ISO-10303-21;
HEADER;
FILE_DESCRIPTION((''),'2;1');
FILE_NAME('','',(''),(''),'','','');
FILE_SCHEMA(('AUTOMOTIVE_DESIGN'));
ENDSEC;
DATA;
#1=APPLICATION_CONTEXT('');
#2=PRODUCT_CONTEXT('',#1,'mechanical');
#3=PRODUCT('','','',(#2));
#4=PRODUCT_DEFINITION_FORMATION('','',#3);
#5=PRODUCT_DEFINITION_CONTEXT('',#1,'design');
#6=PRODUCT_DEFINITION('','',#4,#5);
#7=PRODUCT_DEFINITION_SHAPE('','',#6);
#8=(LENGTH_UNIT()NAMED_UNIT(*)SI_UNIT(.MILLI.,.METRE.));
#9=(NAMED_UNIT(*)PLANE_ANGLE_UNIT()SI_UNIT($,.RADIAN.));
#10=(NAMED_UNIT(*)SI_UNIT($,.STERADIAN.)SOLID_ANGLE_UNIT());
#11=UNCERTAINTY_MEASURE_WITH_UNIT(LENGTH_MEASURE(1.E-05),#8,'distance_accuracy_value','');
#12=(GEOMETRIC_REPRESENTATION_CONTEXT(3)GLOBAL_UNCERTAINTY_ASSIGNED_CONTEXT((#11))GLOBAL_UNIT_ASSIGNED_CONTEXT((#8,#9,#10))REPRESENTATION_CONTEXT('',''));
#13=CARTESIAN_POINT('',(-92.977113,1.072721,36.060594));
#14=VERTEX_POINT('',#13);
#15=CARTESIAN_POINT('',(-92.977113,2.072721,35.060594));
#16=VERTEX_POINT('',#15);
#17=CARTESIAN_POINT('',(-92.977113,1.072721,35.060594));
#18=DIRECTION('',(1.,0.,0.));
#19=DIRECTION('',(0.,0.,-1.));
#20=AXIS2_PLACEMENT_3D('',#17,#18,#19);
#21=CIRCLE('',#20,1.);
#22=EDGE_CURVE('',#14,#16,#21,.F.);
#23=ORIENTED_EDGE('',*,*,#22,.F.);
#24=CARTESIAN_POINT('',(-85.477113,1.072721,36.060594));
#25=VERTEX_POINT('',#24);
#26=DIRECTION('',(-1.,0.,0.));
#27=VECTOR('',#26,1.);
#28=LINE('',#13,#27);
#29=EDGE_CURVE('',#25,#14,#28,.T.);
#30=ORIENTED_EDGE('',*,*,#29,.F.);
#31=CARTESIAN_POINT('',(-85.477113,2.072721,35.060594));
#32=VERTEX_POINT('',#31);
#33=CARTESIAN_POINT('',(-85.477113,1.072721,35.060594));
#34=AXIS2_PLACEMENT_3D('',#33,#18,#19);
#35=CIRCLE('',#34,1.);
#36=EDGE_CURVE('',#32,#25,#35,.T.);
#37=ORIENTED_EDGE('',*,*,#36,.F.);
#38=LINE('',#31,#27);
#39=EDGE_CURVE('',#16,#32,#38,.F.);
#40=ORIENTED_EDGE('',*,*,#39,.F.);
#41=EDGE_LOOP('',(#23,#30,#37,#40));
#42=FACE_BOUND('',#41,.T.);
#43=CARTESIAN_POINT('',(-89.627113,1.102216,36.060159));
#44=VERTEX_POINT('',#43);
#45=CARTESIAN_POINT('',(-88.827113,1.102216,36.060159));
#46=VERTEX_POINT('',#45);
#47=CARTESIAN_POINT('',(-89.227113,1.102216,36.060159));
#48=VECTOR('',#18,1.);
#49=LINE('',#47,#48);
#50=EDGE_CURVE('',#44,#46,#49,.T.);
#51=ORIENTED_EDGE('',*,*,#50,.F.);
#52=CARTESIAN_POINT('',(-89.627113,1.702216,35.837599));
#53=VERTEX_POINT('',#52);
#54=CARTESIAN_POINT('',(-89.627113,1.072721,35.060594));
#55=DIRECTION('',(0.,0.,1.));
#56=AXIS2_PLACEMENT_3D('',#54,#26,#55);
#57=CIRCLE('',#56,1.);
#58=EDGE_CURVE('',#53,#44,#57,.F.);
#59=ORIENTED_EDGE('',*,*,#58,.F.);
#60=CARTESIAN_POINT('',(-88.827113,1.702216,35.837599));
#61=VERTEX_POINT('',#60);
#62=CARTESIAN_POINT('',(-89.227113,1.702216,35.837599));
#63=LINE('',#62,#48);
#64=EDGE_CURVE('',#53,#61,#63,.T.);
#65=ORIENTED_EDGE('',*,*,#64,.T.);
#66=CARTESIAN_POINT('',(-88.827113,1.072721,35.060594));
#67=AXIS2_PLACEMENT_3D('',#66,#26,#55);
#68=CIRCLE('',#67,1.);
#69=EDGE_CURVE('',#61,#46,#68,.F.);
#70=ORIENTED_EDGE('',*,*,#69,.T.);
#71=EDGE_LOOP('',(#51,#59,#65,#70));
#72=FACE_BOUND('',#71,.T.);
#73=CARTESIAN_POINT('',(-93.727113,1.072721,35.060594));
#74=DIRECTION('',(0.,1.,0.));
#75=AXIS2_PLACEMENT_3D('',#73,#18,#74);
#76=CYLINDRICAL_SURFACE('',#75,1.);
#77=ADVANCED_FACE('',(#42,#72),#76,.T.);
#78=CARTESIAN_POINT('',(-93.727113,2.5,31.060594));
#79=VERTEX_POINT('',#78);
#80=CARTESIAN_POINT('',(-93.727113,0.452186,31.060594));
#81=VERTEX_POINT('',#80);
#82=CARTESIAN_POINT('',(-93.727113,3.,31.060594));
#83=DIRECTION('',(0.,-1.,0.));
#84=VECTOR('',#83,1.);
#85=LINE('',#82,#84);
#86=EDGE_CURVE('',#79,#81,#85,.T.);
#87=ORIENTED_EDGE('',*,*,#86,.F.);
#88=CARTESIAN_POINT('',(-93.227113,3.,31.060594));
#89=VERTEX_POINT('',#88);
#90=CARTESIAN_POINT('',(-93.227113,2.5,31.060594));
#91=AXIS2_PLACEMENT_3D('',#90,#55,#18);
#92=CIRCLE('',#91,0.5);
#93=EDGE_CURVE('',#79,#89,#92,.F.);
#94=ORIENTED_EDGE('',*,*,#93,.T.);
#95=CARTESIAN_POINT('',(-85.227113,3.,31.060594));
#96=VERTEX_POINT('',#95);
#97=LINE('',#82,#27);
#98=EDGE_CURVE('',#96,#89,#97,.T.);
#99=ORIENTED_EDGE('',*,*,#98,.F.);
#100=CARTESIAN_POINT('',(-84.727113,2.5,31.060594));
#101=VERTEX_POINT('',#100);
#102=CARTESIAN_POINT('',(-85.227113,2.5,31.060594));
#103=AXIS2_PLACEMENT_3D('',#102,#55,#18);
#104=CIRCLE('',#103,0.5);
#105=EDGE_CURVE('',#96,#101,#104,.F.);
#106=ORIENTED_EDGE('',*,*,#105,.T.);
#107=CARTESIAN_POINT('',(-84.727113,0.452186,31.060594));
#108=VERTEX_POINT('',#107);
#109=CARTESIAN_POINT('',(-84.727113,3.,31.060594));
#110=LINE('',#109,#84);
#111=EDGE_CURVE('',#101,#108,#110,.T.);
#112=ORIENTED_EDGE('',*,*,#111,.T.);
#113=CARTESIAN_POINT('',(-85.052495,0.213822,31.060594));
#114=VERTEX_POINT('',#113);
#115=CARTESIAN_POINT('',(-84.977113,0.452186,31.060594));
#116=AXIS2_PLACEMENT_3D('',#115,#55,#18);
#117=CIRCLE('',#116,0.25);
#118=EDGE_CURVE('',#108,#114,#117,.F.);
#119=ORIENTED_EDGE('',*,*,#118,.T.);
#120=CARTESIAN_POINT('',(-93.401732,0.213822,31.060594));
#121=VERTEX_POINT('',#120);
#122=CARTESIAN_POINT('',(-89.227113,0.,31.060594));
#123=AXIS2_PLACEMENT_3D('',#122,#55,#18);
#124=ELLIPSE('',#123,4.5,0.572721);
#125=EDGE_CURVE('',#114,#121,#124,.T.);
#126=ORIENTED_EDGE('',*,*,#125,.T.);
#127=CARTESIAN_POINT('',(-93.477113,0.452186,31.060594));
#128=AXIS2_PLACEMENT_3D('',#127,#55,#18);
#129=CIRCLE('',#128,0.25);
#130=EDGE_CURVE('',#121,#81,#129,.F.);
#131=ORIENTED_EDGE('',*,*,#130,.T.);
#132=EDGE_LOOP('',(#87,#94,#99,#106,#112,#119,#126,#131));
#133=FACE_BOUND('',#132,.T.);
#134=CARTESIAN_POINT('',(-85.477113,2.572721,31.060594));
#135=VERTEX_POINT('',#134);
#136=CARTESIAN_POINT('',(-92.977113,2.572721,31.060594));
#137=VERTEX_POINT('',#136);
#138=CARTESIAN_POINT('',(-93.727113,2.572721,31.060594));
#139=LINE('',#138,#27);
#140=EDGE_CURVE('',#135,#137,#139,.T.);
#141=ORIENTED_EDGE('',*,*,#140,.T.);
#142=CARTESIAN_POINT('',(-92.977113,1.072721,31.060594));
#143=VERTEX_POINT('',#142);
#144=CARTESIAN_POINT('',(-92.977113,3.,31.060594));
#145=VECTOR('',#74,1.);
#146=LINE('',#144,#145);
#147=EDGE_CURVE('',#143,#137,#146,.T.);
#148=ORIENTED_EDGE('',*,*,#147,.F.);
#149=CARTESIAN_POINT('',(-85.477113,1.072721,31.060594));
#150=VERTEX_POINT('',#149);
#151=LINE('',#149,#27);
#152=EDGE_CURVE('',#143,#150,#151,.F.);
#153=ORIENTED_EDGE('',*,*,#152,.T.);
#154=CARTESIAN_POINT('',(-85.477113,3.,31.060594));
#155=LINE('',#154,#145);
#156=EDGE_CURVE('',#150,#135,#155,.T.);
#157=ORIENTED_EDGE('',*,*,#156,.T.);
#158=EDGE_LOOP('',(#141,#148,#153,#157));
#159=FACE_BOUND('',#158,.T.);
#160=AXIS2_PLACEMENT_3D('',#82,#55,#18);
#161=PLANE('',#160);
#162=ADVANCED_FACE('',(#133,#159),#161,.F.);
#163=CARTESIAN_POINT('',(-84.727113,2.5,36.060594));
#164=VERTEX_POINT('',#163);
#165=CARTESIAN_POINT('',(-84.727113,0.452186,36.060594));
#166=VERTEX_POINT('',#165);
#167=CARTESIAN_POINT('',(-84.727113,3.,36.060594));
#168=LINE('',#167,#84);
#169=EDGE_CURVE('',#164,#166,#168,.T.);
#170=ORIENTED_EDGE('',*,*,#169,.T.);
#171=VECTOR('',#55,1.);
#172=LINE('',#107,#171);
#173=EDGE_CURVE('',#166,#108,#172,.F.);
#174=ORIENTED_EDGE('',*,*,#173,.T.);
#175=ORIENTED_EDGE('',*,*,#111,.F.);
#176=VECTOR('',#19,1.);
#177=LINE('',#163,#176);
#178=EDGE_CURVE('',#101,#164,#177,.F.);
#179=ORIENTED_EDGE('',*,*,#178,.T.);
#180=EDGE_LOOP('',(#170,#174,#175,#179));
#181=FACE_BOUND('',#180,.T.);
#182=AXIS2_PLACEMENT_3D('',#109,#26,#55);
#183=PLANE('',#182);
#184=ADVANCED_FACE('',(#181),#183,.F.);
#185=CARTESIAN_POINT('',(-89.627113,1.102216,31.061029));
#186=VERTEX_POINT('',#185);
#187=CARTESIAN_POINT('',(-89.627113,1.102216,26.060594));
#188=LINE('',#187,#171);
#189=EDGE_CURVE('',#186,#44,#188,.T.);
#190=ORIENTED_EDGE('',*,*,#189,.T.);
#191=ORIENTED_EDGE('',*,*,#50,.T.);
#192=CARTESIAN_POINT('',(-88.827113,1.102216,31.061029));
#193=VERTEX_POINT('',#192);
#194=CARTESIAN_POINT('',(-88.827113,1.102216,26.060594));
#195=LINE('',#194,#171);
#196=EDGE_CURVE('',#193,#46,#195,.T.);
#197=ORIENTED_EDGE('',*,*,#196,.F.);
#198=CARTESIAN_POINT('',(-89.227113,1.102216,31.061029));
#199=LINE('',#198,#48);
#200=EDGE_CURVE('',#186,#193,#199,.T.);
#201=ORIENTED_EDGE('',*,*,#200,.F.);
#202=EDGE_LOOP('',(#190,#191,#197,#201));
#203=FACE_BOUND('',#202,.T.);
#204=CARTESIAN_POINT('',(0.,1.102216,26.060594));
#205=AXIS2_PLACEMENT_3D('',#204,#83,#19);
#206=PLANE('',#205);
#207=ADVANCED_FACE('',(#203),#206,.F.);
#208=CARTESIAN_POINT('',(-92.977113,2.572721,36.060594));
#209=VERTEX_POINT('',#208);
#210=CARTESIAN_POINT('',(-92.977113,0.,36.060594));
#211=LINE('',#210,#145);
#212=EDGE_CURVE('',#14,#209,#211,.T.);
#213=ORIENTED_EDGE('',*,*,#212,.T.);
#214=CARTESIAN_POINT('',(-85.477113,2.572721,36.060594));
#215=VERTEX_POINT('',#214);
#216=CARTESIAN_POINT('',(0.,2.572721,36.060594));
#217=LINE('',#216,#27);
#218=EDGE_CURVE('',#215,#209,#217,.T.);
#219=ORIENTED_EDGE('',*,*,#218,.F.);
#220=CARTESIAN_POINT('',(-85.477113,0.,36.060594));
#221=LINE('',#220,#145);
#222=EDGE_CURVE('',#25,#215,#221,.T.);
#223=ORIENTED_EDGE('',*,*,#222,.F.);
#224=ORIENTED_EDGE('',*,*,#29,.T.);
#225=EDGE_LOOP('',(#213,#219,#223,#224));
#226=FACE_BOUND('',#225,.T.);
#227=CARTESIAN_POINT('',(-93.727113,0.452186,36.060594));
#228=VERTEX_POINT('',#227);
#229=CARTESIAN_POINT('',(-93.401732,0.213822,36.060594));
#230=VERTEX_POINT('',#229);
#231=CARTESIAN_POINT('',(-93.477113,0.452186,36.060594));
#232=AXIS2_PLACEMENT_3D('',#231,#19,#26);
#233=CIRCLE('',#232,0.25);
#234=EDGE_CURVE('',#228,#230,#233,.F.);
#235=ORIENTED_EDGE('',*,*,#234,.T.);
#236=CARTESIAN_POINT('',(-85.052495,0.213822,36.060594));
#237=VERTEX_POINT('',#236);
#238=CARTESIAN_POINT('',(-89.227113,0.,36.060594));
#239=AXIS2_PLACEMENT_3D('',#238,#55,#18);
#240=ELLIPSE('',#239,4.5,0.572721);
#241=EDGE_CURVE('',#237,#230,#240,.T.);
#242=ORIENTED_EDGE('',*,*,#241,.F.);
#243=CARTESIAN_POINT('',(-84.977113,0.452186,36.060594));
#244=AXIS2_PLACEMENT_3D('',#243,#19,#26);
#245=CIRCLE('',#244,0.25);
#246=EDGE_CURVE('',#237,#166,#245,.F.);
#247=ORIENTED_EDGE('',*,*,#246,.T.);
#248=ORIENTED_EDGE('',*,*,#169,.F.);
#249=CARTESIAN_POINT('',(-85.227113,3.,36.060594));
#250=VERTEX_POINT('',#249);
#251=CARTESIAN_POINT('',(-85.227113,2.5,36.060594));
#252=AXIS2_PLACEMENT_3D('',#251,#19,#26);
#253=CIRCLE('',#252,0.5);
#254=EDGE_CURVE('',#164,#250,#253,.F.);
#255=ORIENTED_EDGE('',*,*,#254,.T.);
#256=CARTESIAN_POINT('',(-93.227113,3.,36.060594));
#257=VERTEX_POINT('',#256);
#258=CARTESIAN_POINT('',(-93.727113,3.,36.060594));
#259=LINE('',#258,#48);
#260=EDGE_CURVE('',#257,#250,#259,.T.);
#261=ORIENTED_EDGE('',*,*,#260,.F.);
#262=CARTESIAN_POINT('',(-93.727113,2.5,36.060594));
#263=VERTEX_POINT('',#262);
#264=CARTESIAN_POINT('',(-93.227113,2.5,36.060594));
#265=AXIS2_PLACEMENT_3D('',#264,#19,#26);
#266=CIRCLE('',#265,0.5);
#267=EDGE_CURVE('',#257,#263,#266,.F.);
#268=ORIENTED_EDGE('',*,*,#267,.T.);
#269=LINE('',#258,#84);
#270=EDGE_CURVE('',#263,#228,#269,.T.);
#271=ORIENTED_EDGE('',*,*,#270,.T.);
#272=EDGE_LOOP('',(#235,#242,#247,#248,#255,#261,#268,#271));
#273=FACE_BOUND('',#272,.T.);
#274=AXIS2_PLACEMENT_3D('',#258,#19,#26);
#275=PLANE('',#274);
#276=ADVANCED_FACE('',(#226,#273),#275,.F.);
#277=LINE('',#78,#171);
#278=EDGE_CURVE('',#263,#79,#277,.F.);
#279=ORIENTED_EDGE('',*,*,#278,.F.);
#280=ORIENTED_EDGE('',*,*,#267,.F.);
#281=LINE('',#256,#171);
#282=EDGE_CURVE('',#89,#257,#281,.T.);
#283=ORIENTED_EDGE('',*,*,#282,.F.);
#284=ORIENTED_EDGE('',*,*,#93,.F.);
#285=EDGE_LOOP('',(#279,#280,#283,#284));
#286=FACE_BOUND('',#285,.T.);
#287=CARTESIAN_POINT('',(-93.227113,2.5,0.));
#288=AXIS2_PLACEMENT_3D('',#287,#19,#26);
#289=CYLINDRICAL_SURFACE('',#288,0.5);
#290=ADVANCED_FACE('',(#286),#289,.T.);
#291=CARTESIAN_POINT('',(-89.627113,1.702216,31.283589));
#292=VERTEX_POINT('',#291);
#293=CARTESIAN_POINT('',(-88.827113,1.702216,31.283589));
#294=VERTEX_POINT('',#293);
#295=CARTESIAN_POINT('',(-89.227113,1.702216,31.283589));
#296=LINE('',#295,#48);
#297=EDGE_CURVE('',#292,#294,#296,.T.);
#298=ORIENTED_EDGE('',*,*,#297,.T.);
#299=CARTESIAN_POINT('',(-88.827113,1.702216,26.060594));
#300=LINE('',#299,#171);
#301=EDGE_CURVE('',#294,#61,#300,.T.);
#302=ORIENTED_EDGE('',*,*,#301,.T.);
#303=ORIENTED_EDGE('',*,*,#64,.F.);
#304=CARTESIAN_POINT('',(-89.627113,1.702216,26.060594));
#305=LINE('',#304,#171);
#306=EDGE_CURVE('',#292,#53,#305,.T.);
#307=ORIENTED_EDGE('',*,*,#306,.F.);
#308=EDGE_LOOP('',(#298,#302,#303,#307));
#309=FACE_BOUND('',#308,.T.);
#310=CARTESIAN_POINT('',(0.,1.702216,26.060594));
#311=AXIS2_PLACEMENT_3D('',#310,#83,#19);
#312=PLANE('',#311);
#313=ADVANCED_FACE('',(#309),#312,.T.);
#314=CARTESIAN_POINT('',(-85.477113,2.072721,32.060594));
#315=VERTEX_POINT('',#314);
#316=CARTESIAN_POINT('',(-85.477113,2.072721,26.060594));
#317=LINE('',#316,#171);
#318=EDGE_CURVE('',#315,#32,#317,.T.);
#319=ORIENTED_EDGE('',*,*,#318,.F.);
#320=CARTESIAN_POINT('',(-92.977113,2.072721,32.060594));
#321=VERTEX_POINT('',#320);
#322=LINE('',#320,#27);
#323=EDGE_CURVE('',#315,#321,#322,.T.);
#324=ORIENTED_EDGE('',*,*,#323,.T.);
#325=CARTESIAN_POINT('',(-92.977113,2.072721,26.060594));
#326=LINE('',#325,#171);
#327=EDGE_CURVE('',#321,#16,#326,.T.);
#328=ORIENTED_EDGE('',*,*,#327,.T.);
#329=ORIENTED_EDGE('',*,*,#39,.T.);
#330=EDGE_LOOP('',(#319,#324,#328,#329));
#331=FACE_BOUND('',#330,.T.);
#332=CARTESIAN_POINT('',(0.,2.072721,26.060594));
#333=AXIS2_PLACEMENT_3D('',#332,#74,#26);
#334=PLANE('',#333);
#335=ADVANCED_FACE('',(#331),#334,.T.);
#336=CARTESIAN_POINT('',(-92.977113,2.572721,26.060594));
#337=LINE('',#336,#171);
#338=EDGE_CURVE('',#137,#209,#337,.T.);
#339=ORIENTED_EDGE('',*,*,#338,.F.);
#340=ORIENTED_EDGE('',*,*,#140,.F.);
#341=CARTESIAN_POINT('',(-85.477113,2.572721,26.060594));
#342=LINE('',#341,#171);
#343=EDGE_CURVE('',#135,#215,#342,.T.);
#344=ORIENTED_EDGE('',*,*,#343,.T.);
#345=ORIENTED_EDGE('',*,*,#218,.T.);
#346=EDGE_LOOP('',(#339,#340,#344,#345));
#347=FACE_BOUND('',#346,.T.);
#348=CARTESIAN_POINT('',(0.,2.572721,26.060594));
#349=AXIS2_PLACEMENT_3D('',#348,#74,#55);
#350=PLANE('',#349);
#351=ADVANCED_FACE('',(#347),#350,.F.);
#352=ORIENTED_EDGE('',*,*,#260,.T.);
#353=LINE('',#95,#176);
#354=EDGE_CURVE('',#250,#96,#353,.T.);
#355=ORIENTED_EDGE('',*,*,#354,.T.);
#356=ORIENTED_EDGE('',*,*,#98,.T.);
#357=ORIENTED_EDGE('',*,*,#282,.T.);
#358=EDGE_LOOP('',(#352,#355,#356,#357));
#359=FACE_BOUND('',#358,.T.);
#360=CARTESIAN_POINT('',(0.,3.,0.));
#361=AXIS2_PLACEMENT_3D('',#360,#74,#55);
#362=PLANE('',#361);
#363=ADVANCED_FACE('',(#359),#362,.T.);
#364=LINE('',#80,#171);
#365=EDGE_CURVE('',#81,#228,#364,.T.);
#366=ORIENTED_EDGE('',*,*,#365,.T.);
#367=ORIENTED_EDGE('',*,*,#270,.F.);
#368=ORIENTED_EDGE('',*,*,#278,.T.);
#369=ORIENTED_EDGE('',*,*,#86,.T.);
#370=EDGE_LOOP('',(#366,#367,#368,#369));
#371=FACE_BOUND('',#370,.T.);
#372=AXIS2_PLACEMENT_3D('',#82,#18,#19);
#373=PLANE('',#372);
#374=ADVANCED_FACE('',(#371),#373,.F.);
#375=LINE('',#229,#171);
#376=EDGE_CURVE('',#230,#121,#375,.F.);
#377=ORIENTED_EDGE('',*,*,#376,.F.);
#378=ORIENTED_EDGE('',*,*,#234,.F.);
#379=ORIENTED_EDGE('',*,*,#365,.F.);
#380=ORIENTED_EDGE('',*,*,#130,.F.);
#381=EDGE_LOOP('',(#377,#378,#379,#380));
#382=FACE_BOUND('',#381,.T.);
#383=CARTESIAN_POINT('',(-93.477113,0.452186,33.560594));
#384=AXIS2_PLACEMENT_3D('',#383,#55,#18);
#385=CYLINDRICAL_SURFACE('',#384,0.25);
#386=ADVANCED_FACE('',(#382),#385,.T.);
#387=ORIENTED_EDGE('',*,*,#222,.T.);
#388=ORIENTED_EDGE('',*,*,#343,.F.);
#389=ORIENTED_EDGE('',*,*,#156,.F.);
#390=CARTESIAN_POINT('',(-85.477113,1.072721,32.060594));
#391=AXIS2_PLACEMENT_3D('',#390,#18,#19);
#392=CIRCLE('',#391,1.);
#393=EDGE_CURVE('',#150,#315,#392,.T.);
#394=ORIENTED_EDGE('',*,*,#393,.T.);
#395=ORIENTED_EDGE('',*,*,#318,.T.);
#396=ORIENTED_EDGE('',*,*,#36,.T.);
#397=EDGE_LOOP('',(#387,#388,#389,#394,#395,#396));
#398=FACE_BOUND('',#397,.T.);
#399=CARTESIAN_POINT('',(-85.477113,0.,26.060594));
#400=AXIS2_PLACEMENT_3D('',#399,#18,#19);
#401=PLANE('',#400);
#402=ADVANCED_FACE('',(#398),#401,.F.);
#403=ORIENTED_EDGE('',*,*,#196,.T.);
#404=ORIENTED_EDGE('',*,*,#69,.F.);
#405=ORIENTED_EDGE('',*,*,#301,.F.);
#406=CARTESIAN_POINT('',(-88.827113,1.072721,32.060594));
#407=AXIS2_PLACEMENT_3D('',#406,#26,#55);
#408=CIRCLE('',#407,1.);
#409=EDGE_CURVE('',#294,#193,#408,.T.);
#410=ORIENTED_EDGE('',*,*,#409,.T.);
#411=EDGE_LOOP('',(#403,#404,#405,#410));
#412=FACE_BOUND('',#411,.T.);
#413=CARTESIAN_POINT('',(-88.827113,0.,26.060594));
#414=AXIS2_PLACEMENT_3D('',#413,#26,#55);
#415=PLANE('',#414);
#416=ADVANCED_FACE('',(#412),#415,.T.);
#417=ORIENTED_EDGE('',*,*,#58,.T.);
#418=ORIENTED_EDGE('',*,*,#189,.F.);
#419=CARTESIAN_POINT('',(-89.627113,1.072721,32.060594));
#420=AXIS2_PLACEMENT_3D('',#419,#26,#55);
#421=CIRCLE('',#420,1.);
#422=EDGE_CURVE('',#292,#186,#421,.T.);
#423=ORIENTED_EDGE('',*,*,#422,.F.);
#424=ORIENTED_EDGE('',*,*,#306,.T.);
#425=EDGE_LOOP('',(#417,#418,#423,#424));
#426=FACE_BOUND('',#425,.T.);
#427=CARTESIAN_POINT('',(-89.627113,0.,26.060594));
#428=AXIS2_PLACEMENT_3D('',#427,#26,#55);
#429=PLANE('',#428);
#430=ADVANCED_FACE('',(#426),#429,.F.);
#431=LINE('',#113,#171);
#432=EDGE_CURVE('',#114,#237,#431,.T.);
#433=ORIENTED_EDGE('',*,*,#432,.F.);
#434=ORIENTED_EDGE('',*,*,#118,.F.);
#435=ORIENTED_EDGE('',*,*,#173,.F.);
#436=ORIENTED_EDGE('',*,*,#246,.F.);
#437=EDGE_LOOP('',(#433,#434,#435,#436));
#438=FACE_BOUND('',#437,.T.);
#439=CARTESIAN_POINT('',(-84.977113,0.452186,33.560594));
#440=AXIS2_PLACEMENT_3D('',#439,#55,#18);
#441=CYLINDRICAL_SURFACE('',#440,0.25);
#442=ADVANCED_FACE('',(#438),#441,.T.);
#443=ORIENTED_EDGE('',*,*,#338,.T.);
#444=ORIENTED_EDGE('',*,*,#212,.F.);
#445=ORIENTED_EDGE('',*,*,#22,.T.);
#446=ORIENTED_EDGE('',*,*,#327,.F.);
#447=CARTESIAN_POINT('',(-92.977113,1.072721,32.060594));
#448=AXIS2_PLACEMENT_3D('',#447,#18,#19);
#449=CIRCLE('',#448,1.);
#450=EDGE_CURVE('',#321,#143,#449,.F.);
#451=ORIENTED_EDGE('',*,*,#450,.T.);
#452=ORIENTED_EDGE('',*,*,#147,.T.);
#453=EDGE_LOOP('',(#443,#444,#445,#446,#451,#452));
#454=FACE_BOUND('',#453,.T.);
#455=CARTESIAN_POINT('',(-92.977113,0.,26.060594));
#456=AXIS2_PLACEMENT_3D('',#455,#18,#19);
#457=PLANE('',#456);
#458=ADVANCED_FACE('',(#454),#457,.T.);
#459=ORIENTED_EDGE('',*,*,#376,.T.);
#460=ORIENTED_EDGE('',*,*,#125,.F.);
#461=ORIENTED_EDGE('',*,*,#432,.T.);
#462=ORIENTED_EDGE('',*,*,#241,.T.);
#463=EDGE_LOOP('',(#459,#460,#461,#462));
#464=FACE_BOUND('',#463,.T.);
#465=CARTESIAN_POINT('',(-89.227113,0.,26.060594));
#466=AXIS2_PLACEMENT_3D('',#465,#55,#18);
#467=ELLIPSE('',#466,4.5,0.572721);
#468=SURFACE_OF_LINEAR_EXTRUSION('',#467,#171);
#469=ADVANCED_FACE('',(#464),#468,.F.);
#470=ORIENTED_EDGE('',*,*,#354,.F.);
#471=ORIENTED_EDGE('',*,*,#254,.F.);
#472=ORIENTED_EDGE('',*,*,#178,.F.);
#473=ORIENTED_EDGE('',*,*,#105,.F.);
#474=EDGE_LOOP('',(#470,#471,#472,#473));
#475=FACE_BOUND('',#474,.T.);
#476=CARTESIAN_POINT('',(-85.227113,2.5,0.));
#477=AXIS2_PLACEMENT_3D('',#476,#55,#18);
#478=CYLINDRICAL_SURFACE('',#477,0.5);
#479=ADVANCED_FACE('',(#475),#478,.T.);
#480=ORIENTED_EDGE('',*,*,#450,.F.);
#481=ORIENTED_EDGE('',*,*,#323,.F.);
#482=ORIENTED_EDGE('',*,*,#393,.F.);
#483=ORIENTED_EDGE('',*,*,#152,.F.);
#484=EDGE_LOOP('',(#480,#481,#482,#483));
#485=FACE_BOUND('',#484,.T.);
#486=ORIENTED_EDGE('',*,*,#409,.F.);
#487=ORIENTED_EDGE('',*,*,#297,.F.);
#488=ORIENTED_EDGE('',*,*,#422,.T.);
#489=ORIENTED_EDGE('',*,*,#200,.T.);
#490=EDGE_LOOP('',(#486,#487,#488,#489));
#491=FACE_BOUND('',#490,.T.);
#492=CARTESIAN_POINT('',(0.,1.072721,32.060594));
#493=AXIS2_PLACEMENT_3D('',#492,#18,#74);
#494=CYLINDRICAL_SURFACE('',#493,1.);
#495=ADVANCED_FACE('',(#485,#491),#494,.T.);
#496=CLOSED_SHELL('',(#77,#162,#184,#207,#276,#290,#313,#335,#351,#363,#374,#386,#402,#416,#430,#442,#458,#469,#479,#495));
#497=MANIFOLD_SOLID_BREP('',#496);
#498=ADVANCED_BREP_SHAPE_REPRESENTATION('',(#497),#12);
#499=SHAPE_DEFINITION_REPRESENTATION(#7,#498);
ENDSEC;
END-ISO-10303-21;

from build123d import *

# Parameters (mm, degrees)
SKETCH1_W           = 9
SKETCH1_H           = 5
BOSS_EXTRUDE1_DEPTH = 3
SKETCH2_RX          = 4.5
SKETCH2_RY          = 0.5727208
CUT_EXTRUDE1_DEPTH  = 10
FILLET1_START       = 30
FILLET1_DEPTH       = 7
CUT_EXTRUDE3_DEPTH  = 10
FILLET2_R           = 0.5
FILLET3_R           = 1


with BuildPart() as part:
    # Sketch1 → Boss-Extrude1 (new body)
    with BuildSketch(Plane(origin=(0, 0, 0), x_dir=(1, 0, 0), z_dir=(0, 1, 0))):
        with Locations((-89.22711343, -33.560593966)):
            Rectangle(SKETCH1_W, SKETCH1_H)
    extrude(amount=BOSS_EXTRUDE1_DEPTH)

    # Sketch2 → Cut-Extrude1 (cut)
    with BuildSketch(Plane.XY.offset(36.060593966)):
        with Locations((-89.22711343, 0)):
            Ellipse(SKETCH2_RX, SKETCH2_RY)
    extrude(amount=-CUT_EXTRUDE1_DEPTH, mode=Mode.SUBTRACT)

    # Fillet1: read off the stored shape, not the designer's step
    # Fillet1 outline → Fillet1 (cut)
    with BuildSketch(Plane.XY.offset(FILLET1_START)):
        with BuildLine():
            ThreePointArc((-84.72711343, 0.452186329), (-84.82937288, 0.250511517), (-85.052495268, 0.213821947))
            add(Edge.make_bspline(
                [(-84.72711343, 0), (-84.72711343, 0.110921166), (-85.052495268, 0.213821947)],
                knots=[0, 0, 0, 0.398284272, 0.398284272, 0.398284272], degree=2, weights=[1, 0.925735272, 0.889131025]))
            Line((-84.72711343, 0), (-84.72711343, 0.452186329))
        make_face()
        with BuildLine():
            ThreePointArc((-93.401731592, 0.213821947), (-93.62485398, 0.250511517), (-93.72711343, 0.452186329))
            Line((-93.72711343, 0.452186329), (-93.72711343, 0))
            add(Edge.make_bspline(
                [(-93.401731592, 0.213821947), (-93.72711343, 0.110921166), (-93.72711343, 0)],
                knots=[2.743308382, 2.743308382, 2.743308382, 3.141592654, 3.141592654, 3.141592654], degree=2, weights=[0.889131025, 0.925735272, 1]))
        make_face()
    extrude(amount=FILLET1_DEPTH, mode=Mode.SUBTRACT)

    # Sketch3 → Cut-Extrude3 (cut)
    with BuildSketch(Plane.XY.offset(36.060593966)):
        Polygon((-85.47711343, 2.0727208), (-85.47711343, 2.5727208), (-92.97711343, 2.5727208), (-92.97711343, 2.0727208), (-89.22711343, 2.0727208), align=None)
        Polygon((-88.82711343, 1.702215796), (-88.82711343, 1.102215796), (-89.62711343, 1.102215796), (-89.62711343, 1.702215796), (-89.22711343, 1.702215796), align=None)
    extrude(amount=-CUT_EXTRUDE3_DEPTH, mode=Mode.SUBTRACT)

    # Fillet2
    fillet2_edges = [part.edges().sort_by_distance(p)[0] for p in [
        (-84.72711343, 3, 33.560593966),
        (-93.72711343, 3, 33.560593966),
    ]]
    fillet(fillet2_edges, radius=FILLET2_R)

    # Fillet3
    # the kernel refuses this fillet: 1 mm, written as the material it takes off along each edge
    with BuildSketch(Plane(origin=(-85.47711343, 2.0727208, 31.060593966), x_dir=(0, -1, 0), z_dir=(-1, 0, 0)), Plane(origin=(-85.47711343, 2.0727208, 36.060593966), x_dir=(0, 0, -1), z_dir=(-1, 0, 0))) as fillet3_piece_1:
        with BuildLine():
            CenterArc((FILLET3_R, FILLET3_R), FILLET3_R, 180, 90)
            Line((0, FILLET3_R), (0, 0))
            Line((0, 0), (FILLET3_R, 0))
        make_face()
    extrude(amount=7.5, mode=Mode.SUBTRACT)


solid = part.part
